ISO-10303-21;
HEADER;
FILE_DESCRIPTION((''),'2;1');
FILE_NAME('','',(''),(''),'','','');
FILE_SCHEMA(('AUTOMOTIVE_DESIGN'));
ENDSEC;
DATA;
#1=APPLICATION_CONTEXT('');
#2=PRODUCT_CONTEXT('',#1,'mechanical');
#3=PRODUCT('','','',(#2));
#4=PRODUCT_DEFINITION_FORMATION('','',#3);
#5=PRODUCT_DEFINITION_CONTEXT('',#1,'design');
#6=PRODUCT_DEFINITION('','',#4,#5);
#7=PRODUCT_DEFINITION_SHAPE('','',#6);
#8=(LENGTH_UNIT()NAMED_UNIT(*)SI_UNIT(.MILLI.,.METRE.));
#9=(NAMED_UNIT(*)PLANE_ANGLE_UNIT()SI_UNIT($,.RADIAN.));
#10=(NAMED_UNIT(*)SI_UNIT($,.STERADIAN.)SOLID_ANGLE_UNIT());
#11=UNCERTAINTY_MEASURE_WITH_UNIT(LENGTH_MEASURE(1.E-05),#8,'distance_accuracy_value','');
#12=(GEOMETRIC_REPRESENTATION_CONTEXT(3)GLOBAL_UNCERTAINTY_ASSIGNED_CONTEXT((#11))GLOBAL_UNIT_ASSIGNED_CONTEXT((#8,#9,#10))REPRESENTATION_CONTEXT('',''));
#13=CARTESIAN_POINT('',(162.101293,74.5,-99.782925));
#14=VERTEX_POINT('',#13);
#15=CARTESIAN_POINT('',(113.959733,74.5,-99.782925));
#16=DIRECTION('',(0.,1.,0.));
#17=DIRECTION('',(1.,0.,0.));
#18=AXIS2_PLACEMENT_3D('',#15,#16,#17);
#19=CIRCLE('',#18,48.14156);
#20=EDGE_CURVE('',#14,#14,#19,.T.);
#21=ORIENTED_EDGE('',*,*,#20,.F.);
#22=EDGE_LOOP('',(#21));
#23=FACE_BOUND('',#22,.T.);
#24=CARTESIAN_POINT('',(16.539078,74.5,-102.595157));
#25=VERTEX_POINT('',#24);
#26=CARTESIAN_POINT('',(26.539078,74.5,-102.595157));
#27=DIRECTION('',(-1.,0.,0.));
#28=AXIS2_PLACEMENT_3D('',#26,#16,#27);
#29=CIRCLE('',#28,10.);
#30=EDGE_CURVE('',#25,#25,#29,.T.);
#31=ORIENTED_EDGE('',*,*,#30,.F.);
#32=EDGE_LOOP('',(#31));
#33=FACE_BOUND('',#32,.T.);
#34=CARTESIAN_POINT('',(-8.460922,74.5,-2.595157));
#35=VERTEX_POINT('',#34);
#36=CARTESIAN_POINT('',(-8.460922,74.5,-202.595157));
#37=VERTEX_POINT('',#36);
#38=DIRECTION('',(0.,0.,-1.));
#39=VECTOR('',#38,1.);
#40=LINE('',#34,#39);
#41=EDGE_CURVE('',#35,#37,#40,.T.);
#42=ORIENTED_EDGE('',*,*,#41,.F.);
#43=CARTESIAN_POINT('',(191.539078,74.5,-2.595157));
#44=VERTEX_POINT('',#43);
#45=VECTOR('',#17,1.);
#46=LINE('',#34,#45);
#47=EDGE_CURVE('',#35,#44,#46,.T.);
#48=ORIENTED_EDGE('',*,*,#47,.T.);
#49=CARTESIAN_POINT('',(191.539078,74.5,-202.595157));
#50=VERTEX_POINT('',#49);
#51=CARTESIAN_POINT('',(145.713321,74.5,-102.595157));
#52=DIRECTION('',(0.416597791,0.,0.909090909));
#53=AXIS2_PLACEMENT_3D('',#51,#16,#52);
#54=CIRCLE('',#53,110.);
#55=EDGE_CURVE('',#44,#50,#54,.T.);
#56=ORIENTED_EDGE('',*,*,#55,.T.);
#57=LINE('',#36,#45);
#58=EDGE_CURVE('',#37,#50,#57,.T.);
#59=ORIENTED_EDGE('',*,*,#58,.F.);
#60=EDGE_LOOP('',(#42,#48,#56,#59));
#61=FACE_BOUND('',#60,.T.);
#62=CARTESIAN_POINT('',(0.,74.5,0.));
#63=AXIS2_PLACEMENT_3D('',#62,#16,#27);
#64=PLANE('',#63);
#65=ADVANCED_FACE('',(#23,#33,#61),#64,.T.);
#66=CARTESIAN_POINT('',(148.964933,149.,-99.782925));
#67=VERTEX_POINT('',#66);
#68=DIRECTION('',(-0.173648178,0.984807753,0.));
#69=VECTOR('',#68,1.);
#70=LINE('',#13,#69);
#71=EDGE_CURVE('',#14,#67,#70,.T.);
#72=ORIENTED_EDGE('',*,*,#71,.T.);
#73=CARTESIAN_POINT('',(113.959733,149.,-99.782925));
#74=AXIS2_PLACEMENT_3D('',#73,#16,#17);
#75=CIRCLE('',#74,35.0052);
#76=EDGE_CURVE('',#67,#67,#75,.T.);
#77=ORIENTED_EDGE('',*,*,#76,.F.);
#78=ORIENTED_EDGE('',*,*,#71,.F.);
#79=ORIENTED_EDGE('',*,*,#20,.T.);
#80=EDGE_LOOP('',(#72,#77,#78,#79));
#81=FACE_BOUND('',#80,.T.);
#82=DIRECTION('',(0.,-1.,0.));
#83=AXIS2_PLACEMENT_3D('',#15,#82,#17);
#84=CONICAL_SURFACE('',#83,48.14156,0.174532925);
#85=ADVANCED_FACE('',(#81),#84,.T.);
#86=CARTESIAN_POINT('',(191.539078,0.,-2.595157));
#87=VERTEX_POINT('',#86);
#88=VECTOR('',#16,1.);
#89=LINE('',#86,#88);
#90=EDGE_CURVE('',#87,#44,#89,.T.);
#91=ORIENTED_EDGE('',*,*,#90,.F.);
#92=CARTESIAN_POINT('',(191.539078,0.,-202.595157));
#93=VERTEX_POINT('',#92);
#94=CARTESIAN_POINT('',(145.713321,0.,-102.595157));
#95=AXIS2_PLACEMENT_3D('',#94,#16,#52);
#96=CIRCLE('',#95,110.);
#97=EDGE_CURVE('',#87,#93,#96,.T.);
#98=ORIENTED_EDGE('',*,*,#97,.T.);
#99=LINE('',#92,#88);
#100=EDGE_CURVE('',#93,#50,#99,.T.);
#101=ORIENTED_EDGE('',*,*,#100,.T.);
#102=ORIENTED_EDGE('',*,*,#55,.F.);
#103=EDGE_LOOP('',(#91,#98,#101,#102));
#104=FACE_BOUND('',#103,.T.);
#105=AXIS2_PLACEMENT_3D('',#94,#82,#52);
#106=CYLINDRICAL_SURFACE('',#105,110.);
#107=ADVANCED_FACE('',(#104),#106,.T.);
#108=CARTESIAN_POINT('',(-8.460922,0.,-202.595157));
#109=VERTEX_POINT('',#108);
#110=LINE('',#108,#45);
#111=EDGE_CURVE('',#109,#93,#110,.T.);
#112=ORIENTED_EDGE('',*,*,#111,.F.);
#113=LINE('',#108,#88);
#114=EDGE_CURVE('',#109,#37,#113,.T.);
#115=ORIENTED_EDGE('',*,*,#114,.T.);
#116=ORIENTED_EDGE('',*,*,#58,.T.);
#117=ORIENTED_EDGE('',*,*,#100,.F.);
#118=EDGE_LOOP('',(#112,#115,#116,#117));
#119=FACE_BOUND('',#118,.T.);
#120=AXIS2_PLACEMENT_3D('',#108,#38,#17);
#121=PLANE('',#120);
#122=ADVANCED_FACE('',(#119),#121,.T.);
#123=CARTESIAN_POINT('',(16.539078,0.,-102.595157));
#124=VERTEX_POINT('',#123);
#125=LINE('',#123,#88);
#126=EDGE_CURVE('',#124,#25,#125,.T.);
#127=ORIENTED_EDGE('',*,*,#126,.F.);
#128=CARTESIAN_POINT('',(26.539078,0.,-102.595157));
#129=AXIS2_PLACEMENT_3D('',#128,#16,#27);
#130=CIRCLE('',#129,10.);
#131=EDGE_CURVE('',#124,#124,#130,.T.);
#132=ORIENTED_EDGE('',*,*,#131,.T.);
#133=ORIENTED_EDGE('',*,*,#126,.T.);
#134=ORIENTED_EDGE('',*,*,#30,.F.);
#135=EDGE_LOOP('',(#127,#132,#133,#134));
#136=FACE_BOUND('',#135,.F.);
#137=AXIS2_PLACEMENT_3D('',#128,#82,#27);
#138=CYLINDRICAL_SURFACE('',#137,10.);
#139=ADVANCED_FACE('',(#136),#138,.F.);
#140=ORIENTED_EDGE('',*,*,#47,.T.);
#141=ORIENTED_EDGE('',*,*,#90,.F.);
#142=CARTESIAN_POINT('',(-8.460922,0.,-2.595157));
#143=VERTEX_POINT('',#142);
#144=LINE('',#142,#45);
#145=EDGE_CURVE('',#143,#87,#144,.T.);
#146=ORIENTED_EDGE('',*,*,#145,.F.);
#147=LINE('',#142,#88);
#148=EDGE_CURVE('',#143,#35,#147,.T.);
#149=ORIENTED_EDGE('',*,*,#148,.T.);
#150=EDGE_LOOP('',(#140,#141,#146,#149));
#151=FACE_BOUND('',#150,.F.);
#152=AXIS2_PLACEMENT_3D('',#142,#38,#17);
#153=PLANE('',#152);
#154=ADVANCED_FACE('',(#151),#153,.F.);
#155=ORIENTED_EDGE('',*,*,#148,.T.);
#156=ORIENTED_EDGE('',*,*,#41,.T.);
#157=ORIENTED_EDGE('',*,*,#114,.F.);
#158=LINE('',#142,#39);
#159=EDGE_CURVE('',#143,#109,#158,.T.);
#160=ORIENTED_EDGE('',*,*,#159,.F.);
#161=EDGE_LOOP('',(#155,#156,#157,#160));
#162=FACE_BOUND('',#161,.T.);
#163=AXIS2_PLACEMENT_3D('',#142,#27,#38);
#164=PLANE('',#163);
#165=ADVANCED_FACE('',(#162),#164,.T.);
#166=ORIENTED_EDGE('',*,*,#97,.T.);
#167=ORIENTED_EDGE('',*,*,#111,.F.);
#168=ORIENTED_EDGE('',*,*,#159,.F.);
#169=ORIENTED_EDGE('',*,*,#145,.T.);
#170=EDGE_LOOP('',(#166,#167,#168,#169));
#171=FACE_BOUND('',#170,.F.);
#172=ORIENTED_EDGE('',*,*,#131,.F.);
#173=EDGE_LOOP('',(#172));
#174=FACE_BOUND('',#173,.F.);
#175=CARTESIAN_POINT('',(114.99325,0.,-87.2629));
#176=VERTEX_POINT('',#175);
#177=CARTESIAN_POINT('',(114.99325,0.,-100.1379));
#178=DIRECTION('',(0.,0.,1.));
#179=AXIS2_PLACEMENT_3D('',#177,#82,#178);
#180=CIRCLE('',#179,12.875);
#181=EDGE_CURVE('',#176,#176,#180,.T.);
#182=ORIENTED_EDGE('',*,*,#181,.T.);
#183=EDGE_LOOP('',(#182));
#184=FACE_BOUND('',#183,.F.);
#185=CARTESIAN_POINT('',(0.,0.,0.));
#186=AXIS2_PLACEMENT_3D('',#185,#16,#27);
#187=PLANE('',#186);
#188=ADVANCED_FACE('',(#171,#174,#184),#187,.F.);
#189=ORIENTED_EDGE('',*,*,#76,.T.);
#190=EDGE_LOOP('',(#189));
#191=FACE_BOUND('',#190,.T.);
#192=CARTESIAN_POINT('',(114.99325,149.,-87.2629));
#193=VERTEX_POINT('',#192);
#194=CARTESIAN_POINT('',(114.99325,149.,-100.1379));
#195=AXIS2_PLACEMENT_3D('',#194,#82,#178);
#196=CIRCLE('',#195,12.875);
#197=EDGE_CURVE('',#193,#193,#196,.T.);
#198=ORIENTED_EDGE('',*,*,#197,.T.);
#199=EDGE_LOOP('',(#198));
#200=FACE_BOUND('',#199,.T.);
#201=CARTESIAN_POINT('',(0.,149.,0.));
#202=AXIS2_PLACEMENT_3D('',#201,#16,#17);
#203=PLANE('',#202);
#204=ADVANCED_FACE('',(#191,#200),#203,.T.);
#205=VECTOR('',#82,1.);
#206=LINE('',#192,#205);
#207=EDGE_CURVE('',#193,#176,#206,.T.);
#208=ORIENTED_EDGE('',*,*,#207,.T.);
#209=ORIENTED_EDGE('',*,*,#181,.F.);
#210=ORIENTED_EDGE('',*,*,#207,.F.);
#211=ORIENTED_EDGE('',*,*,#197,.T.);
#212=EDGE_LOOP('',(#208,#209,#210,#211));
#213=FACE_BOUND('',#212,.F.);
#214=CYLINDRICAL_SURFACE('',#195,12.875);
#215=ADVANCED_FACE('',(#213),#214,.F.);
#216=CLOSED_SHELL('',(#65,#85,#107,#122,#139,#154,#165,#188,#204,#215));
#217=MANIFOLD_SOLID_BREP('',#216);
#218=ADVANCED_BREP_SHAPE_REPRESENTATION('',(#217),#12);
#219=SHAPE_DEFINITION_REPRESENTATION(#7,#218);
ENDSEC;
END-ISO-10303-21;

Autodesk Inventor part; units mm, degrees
ref_plane "YZ Plane" through (0, 0, 0) normal (1, 0, 0) x (0, 1, 0)
ref_plane "XZ Plane" through (0, 0, 0) normal (0, 1, 0) x (-1, 0, 0)
ref_plane "XY Plane" through (0, 0, 0) normal (0, 0, 1) x (1, 0, 0)
sketch "Szkic1" plane through (0, 0, 0) normal (0, 1, 0) x (-1, 0, 0)
  line L0 (8.460922, -2.595157) -> (8.460922, -202.595157)
  line L1 (8.460922, -202.595157) -> (-191.539078, -202.595157)
  line L2 (8.460922, -2.595157) -> (-191.539078, -2.595157)
  line L3 (8.460922, -2.595157) -> (208.460922, -2.595157) construction
  arc A0 (-191.539078, -2.595157) -> (-191.539078, -202.595157) centre (-145.713321, -102.595157) ccw
  line L4 (8.460922, -102.595157) -> (43.460922, -102.595157) construction
  circle A1 centre (-26.539078, -102.595157) radius 10
  point P0 (0, 0)
  dimension "d0" = 200
  dimension "d1" = 200
  dimension "d2" = 90
  dimension "d4" = 200
  dimension "d5" = 180
  dimension "d6" = 110
  dimension "d10" = 20
extrude "Wyciągnięcie proste1" add sketch "Szkic1" along normal blind 74.5
sketch "Szkic2" plane through (0, 74.5, 0) normal (0, 1, 0) x (1, 0, 0)
  circle A0 centre (107.96185, 52.890403) radius 34.51232
  circle A1 centre (113.959733, 99.782925) radius 48.14156
  point P0 (0, 0)
sketch "Szkic2 outline for Wyciągnięcie proste2" plane through (0, 74.5, 0) normal (0, 1, 0) x (1, 0, 0)
  circle A0 centre (113.959733, 99.782925) radius 48.14156
extrude "Wyciągnięcie proste2" add sketch "Szkic2 outline for Wyciągnięcie proste2" along normal blind 74.5 draft -10
hole "Otwór1" at (114.99325, 149, -100.1379) direction (0, -1, 0) diameter 25.75 end through all
